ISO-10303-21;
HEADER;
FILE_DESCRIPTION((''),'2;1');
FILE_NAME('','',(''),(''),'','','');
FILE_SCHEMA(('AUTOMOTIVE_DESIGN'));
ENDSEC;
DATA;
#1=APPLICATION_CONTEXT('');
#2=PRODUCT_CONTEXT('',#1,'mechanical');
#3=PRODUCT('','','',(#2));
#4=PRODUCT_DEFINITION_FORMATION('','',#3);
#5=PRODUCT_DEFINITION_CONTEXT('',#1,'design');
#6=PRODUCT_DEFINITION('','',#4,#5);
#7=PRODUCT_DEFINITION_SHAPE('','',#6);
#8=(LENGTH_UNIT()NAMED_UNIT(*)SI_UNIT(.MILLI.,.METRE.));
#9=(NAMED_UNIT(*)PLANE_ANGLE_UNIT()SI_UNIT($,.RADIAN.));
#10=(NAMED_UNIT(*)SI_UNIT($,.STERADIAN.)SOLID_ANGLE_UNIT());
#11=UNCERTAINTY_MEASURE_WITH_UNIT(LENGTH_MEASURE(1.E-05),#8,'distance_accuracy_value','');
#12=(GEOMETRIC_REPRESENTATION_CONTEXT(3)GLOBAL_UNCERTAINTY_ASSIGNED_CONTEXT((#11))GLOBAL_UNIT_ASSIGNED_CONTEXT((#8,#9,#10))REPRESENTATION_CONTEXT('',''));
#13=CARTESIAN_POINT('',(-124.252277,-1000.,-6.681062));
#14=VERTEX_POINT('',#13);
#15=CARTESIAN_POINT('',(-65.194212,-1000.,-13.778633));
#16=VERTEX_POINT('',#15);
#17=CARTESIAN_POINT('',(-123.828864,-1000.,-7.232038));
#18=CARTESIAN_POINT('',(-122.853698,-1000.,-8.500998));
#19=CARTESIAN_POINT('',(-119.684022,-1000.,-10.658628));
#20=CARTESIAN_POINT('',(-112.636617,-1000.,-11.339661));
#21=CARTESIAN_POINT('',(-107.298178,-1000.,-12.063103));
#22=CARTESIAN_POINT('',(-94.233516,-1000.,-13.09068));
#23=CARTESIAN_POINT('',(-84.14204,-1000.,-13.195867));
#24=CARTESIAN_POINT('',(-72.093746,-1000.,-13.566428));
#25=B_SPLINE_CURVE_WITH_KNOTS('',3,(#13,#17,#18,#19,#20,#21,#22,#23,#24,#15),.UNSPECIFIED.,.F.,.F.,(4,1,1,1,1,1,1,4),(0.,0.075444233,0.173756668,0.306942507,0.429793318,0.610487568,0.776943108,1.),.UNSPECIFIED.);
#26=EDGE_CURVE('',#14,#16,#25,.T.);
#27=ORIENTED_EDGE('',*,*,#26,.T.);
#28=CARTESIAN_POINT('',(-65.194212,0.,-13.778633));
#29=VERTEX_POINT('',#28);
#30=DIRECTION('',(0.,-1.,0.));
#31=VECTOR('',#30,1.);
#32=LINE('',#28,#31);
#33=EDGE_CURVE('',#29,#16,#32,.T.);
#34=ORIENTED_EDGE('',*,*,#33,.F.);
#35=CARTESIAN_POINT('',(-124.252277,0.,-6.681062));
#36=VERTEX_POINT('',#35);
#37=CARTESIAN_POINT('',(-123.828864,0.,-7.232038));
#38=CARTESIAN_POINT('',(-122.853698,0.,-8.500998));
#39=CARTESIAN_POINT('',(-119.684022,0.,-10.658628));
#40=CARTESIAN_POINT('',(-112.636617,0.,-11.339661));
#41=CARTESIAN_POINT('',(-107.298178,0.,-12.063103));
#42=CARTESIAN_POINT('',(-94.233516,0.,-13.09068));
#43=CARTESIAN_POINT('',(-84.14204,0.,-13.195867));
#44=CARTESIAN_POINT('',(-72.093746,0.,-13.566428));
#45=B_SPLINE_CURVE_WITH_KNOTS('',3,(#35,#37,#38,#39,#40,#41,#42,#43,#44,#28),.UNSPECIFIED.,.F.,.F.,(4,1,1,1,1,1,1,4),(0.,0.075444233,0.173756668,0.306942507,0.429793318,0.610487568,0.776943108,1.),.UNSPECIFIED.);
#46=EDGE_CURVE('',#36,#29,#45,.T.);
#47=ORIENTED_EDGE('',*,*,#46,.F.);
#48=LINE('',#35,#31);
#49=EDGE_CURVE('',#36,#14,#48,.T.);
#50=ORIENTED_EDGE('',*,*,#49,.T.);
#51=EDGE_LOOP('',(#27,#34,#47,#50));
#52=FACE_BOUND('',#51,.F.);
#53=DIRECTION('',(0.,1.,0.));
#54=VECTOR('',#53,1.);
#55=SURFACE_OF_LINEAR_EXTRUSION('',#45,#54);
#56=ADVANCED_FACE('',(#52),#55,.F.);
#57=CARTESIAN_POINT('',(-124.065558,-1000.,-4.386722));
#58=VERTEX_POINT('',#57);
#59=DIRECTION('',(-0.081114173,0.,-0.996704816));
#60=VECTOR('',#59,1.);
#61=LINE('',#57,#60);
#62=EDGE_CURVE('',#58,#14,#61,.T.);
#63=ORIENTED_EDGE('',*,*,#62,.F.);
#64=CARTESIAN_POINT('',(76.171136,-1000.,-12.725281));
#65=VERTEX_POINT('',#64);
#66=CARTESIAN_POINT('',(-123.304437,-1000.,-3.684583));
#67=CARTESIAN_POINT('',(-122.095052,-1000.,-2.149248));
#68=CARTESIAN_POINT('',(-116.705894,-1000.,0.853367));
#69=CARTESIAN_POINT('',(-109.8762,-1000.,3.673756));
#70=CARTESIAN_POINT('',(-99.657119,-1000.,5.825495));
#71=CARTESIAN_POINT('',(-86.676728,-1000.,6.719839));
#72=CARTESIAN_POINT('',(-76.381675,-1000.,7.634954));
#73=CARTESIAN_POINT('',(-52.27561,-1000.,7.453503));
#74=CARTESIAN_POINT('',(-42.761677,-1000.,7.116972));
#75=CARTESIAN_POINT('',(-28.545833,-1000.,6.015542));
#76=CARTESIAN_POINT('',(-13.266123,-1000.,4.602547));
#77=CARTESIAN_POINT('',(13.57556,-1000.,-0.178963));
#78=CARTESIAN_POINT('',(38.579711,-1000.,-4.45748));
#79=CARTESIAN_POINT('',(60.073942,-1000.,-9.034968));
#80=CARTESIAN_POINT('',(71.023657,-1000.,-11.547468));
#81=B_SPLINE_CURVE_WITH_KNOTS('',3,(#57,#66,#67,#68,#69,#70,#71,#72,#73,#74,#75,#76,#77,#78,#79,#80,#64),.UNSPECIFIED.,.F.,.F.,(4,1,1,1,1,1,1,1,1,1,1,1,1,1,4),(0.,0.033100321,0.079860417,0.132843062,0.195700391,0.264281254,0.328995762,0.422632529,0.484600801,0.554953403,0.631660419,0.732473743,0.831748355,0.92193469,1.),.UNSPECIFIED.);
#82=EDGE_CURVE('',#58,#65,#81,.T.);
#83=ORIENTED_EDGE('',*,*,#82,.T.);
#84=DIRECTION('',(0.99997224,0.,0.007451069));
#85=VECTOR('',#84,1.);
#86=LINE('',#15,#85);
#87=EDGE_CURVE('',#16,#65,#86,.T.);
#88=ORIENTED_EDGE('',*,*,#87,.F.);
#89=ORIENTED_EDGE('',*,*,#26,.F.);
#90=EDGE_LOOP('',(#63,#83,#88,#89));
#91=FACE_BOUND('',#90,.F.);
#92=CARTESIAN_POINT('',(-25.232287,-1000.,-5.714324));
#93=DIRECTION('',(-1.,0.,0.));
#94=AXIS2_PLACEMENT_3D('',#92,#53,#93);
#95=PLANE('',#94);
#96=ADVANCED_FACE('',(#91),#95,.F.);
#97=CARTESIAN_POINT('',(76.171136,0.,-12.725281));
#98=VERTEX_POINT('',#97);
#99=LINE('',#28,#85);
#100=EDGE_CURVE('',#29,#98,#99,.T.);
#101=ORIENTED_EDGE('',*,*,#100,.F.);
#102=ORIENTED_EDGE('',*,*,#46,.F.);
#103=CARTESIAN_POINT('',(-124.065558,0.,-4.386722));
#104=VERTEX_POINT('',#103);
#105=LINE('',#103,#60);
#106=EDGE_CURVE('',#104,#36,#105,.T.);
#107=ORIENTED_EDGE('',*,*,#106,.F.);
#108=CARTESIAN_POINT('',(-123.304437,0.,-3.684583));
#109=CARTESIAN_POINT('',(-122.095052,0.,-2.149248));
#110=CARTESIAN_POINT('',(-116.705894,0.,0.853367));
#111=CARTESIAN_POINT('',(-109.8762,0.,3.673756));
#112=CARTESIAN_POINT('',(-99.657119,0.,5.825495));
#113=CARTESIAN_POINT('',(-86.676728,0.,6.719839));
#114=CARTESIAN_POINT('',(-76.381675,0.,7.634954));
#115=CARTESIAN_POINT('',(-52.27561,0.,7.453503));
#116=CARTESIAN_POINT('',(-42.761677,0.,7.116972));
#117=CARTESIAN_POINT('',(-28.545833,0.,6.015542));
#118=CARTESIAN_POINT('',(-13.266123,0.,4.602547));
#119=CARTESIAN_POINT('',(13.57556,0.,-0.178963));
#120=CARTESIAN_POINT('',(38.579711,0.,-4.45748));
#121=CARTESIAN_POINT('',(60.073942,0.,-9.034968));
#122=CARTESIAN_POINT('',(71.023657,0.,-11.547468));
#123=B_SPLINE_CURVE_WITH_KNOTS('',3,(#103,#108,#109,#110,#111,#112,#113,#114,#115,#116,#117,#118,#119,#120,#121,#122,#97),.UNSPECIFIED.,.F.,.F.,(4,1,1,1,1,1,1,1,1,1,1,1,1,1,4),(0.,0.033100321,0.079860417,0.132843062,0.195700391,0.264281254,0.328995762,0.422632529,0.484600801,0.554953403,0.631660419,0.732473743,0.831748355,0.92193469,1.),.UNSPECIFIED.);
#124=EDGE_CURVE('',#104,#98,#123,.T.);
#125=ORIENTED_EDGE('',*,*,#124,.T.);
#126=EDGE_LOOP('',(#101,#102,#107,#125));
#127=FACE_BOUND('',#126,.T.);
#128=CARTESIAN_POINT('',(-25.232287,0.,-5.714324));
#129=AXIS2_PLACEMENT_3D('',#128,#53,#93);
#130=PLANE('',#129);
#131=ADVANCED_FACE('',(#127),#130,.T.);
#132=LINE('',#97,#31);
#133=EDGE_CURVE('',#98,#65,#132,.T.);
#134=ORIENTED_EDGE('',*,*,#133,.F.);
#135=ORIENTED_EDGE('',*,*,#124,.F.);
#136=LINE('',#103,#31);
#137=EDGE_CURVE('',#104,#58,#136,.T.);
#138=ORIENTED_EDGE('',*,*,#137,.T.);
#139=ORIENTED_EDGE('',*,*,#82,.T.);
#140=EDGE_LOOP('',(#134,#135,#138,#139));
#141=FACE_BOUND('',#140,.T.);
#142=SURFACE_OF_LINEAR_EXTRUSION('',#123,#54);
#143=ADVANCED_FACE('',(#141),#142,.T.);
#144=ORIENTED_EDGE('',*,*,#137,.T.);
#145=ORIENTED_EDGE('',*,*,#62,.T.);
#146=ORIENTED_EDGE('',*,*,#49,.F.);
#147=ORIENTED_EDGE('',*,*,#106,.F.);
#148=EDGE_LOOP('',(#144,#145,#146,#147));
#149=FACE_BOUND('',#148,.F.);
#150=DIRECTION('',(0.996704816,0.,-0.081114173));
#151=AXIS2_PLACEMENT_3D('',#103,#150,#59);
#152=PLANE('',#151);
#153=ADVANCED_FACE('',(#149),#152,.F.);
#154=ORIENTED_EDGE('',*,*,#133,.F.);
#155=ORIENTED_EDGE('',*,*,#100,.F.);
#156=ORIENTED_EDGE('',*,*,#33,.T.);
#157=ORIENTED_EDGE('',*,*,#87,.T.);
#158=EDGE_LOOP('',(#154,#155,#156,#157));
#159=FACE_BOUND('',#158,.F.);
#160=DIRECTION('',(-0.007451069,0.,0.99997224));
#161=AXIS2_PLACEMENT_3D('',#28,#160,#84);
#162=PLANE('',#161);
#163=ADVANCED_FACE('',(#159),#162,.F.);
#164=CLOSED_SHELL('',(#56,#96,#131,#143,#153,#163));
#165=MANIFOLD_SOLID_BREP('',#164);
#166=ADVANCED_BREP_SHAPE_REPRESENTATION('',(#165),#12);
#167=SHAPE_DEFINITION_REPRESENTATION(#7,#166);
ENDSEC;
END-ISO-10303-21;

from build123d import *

# Parameters (mm, degrees)
F1_DEPTH = 1000


# Not quite as in the source:
# - a feature names something its author has since deleted; it is built from what else it names


with BuildPart() as f1:
    # F0 (on Front) → F1 (new body)
    with BuildSketch(Plane.XZ):
        with BuildLine():
            add(Edge.make_bspline(
                [(-124.0655580718, -4.386721941), (-123.3044370948, -3.6845833268), (-122.0950517914, -2.1492476316), (-116.7058944545, 0.8533666692), (-109.8761998426, 3.6737563859), (-99.6571191723, 5.8254945739), (-86.6767282827, 6.7198393742), (-76.3816754653, 7.6349539484), (-52.2756101525, 7.4535026051), (-42.7616771756, 7.1169717413), (-28.5458332747, 6.0155421708), (-13.2661231215, 4.6025471767), (13.575560063, -0.1789631068), (38.5797105731, -4.4574796256), (60.0739421044, -9.0349682194), (71.0236573709, -11.5474682288), (76.1711355444, -12.7252812378)],
                knots=[0, 0, 0, 0, 0.033100321, 0.0798604167, 0.1328430623, 0.195700391, 0.2642812543, 0.3289957623, 0.4226325294, 0.4846008011, 0.5549534026, 0.6316604189, 0.732473743, 0.8317483554, 0.9219346899, 1, 1, 1, 1], degree=3))
            Line((-124.0655580718, -4.386721941), (-124.2522768608, -6.6810622362))
            add(Edge.make_bspline(
                [(-124.2522768608, -6.6810622362), (-123.8288644556, -7.2320381285), (-122.8536975345, -8.5009984338), (-119.684022261, -10.6586279453), (-112.6366169608, -11.3396613327), (-107.2981776041, -12.0631029916), (-94.2335164877, -13.0906799487), (-84.1420398981, -13.1958665568), (-72.0937462666, -13.5664284327), (-65.1942115304, -13.7786334446)],
                knots=[0, 0, 0, 0, 0.0754442327, 0.1737566683, 0.3069425072, 0.4297933177, 0.6104875682, 0.7769431082, 1, 1, 1, 1], degree=3))
            Line((-65.1942115304, -13.7786334446), (76.1711355444, -12.7252812378))
        make_face()
    extrude(amount=F1_DEPTH)


solid = f1.part
